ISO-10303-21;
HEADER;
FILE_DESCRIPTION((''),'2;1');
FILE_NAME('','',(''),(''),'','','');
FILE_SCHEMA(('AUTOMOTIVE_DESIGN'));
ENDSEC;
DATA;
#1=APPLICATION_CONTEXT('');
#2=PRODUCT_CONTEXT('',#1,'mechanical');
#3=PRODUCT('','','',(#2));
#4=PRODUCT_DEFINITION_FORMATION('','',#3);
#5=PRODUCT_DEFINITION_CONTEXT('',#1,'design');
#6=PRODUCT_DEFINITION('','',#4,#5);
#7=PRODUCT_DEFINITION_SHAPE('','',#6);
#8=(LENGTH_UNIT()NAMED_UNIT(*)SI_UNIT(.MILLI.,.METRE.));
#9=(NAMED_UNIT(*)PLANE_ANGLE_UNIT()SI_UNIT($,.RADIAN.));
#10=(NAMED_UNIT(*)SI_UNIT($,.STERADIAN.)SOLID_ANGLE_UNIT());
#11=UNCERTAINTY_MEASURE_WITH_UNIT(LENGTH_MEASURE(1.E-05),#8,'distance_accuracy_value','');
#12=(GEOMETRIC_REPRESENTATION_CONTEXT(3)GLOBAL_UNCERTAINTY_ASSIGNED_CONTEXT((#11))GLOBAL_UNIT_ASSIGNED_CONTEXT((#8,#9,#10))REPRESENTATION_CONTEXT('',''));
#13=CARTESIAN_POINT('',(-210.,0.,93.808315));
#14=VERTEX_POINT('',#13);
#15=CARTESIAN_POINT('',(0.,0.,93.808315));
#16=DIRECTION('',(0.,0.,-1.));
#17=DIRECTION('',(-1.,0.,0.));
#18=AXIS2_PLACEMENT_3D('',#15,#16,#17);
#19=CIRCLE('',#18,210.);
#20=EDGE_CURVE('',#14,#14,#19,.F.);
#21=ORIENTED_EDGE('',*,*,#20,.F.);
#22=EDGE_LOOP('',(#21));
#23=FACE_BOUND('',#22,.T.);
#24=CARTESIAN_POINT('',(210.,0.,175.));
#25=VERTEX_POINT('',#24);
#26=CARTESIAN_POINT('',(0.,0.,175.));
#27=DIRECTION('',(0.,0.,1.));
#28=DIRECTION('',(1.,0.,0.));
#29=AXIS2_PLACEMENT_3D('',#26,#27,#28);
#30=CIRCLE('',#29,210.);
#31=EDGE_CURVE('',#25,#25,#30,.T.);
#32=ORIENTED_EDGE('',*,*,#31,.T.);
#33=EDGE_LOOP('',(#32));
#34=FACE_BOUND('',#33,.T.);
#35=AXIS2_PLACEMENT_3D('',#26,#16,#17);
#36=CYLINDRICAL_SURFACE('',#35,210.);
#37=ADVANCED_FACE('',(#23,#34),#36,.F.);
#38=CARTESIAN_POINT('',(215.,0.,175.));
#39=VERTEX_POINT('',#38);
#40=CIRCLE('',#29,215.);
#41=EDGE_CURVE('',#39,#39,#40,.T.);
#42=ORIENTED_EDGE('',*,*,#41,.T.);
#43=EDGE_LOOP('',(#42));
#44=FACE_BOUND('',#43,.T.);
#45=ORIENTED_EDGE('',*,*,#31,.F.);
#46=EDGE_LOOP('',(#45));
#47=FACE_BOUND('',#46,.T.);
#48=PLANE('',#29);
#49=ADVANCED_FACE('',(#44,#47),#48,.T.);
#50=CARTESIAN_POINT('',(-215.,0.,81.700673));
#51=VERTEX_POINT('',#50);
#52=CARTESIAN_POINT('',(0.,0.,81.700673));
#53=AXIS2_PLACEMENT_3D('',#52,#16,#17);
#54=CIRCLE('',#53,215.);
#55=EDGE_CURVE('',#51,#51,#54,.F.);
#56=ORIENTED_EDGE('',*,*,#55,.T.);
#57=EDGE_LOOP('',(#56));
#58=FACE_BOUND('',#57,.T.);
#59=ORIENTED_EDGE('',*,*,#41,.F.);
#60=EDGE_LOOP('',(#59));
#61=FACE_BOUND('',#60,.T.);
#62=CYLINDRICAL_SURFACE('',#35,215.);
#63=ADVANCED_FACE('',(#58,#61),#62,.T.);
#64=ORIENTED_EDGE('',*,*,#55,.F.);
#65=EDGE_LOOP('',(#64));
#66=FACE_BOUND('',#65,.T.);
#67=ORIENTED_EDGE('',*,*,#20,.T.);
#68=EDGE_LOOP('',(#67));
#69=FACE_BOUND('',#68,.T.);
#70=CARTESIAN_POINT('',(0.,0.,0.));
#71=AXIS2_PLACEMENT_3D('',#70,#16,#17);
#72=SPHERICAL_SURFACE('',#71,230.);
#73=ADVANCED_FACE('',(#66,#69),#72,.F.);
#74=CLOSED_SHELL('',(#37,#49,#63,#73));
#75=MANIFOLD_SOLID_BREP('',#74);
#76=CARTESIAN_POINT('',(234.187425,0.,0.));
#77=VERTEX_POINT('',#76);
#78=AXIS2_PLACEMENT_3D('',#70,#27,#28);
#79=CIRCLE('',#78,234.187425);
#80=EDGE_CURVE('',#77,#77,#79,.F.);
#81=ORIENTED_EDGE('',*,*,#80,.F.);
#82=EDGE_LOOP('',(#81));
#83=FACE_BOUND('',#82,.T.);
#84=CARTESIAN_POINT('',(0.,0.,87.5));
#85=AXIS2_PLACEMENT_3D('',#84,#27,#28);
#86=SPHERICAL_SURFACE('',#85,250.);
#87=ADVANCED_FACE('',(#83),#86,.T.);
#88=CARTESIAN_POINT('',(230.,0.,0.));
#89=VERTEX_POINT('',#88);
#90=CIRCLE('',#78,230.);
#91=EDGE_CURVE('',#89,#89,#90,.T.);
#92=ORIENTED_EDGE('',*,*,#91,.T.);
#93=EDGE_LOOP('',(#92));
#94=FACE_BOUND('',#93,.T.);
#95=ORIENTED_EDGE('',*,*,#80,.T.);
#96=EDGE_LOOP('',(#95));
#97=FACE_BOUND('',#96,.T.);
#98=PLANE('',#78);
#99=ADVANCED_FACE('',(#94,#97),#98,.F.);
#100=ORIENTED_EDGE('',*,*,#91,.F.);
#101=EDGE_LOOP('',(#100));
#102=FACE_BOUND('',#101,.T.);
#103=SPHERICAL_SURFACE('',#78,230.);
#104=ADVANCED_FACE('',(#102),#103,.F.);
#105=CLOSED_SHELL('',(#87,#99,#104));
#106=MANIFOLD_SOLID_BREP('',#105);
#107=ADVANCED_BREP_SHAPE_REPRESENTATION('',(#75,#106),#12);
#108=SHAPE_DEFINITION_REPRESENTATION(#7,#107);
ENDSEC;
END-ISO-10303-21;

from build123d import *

# Parameters (mm, degrees)
SKETCH_4_R              = 215
SKETCH_4_R_2            = 210
EXTRUDE_1_DEPTH         = 175
CUT_EXTRUDE_START       = -162.5
CUT_EXTRUDE_3_OUTLINE_W = 472
CUT_EXTRUDE_3_OUTLINE_H = 472
CUT_EXTRUDE_3_DEPTH     = 162.5


# Read off the part's stored shape, not the designer's step: 切除-拉伸3
with BuildPart() as part:
    # 草图4 → 凸台-拉伸1 (new body)
    with BuildSketch(Plane.XY):
        Circle(SKETCH_4_R)
        Circle(SKETCH_4_R_2, mode=Mode.SUBTRACT)
    extrude(amount=EXTRUDE_1_DEPTH)


with BuildPart() as body_2:
    # 草图5 → 旋转5 (revolve)
    with BuildSketch(Plane(origin=(0, 0, 0), x_dir=(0, 0, -1), z_dir=(1, 0, 0))):
        with BuildLine():
            Line((-87.5, -250), (-87.5, 250))
            ThreePointArc((-87.5, 250), (162.5, 0), (-87.5, -250))
        make_face()
    revolve(axis=Axis((0, -250, 87.5), (0, 1, 0)))

    # 切除-拉伸3 outline → 切除-拉伸3 (cut)
    with BuildSketch(Plane.XY.offset(CUT_EXTRUDE_START)):
        Rectangle(CUT_EXTRUDE_3_OUTLINE_W, CUT_EXTRUDE_3_OUTLINE_H)
    extrude(amount=CUT_EXTRUDE_3_DEPTH, mode=Mode.SUBTRACT)


with BuildPart() as cut_revolve_2_tool:
    # 草图8 → 切除-旋转2 (revolve)
    with BuildSketch(Plane.XY):
        with BuildLine():
            Line((0, -230), (0, 230))
            ThreePointArc((0, 230), (230, 0), (0, -230))
        make_face()
    revolve(axis=Axis((0, -230, 0), (0, 1, 0)))


with BuildPart() as part_1:
    add(part.part)

    # 切除-旋转2: cut by cut_revolve_2_tool
    add(cut_revolve_2_tool.part, mode=Mode.SUBTRACT)


with BuildPart() as body_2_1:
    add(body_2.part)

    # 切除-旋转2: cut by cut_revolve_2_tool
    add(cut_revolve_2_tool.part, mode=Mode.SUBTRACT)


solid = Compound([part_1.part, body_2_1.part])
